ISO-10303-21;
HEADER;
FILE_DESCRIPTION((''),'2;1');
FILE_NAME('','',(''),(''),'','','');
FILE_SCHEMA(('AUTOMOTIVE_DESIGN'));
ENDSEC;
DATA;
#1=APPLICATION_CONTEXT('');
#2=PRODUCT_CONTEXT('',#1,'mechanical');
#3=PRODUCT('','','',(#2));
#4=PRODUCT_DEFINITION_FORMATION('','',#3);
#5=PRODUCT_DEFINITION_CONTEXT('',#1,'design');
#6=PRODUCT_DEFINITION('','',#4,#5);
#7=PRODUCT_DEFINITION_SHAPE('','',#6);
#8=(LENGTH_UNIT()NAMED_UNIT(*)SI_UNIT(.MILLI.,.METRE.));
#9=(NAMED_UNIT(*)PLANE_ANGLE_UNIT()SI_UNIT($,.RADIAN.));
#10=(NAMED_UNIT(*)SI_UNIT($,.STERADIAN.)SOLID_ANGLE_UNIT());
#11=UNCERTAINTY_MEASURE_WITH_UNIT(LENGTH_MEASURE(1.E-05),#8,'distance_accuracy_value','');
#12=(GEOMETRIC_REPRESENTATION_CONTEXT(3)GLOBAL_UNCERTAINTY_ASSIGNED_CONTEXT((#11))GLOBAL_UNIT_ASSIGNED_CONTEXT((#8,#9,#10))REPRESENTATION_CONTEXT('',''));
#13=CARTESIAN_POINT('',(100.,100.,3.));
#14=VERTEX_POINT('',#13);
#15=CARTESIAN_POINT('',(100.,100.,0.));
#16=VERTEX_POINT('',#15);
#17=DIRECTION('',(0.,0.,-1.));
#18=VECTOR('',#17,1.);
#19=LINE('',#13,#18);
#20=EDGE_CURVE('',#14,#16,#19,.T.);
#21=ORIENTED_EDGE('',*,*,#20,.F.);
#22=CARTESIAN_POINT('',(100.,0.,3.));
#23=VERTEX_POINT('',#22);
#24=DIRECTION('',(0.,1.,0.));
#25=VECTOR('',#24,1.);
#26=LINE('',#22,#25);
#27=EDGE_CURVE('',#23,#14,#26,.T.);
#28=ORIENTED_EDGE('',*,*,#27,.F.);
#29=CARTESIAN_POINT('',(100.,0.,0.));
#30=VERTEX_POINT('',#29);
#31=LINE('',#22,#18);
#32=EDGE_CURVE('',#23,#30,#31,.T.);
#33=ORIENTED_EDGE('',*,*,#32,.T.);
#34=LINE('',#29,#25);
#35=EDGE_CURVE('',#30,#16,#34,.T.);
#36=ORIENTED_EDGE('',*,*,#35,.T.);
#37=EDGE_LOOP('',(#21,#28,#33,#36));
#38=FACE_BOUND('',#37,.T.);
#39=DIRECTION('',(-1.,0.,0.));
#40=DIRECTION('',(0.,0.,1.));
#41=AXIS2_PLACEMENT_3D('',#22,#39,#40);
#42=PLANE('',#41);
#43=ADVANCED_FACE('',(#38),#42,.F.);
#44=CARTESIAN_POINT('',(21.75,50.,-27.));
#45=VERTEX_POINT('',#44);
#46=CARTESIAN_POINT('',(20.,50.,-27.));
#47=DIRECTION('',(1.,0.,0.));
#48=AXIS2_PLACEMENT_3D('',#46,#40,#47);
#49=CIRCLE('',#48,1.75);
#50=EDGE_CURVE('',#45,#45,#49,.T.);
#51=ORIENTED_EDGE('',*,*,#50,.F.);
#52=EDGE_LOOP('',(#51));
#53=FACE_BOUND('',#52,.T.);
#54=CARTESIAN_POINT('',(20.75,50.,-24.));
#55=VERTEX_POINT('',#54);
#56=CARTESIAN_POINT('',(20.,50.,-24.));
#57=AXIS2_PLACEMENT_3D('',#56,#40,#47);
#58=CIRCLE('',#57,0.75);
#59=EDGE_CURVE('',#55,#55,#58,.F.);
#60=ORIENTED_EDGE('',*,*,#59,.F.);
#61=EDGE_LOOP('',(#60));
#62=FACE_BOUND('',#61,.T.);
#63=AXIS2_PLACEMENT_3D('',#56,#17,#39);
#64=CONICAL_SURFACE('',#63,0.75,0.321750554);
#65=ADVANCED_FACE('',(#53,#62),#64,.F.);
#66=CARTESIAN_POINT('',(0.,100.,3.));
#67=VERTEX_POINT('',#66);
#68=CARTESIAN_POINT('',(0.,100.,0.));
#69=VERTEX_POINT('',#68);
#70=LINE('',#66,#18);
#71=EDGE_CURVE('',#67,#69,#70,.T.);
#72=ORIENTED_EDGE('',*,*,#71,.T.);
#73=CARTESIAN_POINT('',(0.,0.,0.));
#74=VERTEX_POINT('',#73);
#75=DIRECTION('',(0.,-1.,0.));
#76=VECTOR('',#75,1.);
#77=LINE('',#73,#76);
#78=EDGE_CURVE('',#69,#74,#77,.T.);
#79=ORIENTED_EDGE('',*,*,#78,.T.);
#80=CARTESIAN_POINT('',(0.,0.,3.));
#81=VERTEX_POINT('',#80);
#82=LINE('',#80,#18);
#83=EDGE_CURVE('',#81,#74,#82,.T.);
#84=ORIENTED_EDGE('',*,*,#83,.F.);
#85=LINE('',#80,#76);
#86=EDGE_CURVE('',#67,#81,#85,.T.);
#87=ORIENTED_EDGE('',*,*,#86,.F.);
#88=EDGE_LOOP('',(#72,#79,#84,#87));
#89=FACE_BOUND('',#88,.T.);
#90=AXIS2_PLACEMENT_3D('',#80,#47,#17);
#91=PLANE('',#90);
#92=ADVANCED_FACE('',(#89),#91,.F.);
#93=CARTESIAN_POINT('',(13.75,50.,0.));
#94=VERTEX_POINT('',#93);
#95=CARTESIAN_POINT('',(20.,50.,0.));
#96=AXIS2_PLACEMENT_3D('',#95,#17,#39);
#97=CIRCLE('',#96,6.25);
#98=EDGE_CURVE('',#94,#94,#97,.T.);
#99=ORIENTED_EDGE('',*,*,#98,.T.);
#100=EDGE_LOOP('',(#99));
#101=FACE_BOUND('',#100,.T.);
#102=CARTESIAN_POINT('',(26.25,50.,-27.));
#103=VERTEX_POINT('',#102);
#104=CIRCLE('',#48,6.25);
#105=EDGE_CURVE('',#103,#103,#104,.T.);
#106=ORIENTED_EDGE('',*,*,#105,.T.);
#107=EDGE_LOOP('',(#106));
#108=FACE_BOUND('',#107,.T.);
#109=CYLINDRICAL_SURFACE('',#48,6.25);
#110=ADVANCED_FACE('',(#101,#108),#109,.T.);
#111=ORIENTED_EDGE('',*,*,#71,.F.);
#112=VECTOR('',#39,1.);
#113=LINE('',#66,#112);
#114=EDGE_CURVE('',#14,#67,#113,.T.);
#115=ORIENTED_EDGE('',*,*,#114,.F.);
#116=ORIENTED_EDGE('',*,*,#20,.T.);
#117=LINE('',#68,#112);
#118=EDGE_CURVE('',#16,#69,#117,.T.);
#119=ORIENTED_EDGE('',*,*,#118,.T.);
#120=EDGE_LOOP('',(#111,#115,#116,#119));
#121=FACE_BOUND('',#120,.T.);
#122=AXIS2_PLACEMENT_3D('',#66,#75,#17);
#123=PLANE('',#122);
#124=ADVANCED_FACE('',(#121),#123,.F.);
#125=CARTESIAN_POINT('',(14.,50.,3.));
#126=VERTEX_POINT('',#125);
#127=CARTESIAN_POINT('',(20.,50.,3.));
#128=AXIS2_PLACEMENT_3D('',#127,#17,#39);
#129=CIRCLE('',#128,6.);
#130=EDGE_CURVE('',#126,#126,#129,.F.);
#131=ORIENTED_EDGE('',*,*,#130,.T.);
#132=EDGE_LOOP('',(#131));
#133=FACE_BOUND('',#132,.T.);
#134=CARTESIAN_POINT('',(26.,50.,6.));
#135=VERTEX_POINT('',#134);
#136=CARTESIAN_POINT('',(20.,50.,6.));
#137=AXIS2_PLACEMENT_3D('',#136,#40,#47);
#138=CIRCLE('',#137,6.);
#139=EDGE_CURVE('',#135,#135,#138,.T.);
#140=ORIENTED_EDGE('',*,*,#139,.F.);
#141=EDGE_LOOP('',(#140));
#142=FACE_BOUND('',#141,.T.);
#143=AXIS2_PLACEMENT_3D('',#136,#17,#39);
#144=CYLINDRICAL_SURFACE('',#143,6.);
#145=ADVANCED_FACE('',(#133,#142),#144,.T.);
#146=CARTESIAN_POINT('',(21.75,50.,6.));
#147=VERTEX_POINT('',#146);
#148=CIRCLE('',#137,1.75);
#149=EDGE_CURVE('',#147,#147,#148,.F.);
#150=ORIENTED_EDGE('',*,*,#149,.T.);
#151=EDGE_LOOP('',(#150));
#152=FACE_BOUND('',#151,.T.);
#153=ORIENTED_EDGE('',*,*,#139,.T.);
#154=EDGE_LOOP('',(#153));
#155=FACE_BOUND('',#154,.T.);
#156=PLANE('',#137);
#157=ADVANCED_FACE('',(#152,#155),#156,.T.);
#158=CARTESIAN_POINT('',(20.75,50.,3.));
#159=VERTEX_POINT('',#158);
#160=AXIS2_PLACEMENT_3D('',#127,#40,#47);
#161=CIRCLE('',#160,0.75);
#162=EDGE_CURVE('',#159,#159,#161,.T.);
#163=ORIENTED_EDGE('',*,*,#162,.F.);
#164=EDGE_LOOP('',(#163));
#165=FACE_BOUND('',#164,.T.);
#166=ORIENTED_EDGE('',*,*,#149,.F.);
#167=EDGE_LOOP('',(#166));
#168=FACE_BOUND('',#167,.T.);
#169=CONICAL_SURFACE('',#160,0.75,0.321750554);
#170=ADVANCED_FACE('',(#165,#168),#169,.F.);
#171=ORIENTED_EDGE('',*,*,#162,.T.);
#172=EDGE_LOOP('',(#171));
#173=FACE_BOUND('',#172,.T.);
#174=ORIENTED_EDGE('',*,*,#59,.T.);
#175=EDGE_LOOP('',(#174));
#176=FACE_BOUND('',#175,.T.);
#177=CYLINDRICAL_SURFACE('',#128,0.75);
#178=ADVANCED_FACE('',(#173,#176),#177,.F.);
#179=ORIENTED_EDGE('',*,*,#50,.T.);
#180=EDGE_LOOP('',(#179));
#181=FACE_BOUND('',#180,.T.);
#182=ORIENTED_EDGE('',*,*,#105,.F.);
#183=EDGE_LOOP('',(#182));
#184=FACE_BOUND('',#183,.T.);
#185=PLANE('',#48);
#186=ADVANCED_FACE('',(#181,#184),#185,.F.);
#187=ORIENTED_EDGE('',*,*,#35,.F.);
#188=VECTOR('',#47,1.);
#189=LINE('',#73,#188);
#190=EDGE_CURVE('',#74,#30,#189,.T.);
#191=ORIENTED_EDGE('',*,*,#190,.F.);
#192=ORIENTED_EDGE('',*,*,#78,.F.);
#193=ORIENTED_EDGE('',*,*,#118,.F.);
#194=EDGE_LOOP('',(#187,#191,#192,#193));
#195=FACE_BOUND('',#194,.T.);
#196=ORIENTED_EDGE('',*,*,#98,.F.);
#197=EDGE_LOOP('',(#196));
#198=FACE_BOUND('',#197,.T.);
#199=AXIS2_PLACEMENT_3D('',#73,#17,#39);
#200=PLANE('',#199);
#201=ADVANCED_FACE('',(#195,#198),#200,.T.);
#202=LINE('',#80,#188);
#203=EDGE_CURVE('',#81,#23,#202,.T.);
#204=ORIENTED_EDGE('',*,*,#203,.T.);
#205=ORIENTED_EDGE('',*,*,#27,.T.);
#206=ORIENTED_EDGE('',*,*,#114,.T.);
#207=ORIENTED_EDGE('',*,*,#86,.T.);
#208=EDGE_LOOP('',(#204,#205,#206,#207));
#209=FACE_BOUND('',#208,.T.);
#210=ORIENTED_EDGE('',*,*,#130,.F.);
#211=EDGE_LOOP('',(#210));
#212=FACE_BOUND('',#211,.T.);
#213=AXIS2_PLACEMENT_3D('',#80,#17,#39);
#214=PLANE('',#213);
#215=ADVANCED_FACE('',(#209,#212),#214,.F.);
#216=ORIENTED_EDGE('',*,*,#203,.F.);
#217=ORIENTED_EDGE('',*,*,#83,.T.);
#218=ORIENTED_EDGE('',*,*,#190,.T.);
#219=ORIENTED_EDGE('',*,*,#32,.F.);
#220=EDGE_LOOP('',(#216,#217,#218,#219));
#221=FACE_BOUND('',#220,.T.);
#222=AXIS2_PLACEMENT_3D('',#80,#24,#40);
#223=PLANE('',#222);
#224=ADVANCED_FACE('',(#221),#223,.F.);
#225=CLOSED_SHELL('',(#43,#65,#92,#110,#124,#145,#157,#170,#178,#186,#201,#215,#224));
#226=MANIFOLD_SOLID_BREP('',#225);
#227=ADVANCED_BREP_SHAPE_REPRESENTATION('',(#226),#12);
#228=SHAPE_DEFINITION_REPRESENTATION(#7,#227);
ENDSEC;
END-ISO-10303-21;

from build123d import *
from OCP.BRepFilletAPI import BRepFilletAPI_MakeChamfer

# Parameters (mm, degrees)
SKETCH1_W           = 100
SKETCH1_H           = 100
BOSS_EXTRUDE1_DEPTH = 3
SKETCH2_R           = 6.25
BOSS_EXTRUDE2_DEPTH = 30
SKETCH3_R           = 0.75
CUT_EXTRUDE1_DEPTH  = 145.568322948
SKETCH4_R           = 6
SKETCH4_R_2         = 0.75
BOSS_EXTRUDE3_DEPTH = 3
CHAMFER1_SIZE       = 1
CHAMFER1_SIZE_2     = 3


with BuildPart() as part:
    # Sketch1 → Boss-Extrude1 (new body)
    with BuildSketch(Plane.XY):
        with Locations((50, 50)):
            Rectangle(SKETCH1_W, SKETCH1_H)
    extrude(amount=BOSS_EXTRUDE1_DEPTH)

    # Sketch2 → Boss-Extrude2 (add)
    with BuildSketch(Plane.XY.offset(3)):
        with Locations((20, 50)):
            Circle(SKETCH2_R)
    extrude(amount=-BOSS_EXTRUDE2_DEPTH)

    # Sketch3 → Cut-Extrude1 (cut, through all)
    with BuildSketch(Plane(origin=(0, 0, -27), x_dir=(-1, 0, 0), z_dir=(0, 0, -1))):
        with Locations((-20, 50)):
            Circle(SKETCH3_R)
    extrude(amount=-CUT_EXTRUDE1_DEPTH, mode=Mode.SUBTRACT)

    # Sketch4 → Boss-Extrude3 (add)
    with BuildSketch(Plane.XY.offset(3)):
        with Locations(Location((20, 50, 0), (0, 0, 180))):
            Circle(SKETCH4_R)
        with Locations(Location((20, 50, 0), (0, 0, 180))):
            Circle(SKETCH4_R_2, mode=Mode.SUBTRACT)
    extrude(amount=BOSS_EXTRUDE3_DEPTH)

    # Chamfer1
    chamfer1_edges_1 = [part.edges().sort_by_distance(p)[0] for p in [
        (20.75, 50, -27),
    ]]
    chamfer1_side_1 = [part.faces().sort_by_distance(p)[0] for p in [
        (20.77, 50, -27),
    ]]
    chamfer1_edges_2 = [part.edges().sort_by_distance(p)[0] for p in [
        (20.75, 50, 6),
    ]]
    chamfer1_side_2 = [part.faces().sort_by_distance(p)[0] for p in [
        (20.77, 50, 6),
    ]]
    chamfer1 = BRepFilletAPI_MakeChamfer(part.part.solid().wrapped)
    for e in chamfer1_edges_1:
        chamfer1.Add(CHAMFER1_SIZE - 0.0001, CHAMFER1_SIZE_2 - 0.0001, e.wrapped, chamfer1_side_1[0].wrapped)
    for e in chamfer1_edges_2:
        chamfer1.Add(CHAMFER1_SIZE - 0.0001, CHAMFER1_SIZE_2 - 0.0001, e.wrapped, chamfer1_side_2[0].wrapped)
    add(Compound.cast(chamfer1.Shape()), mode=Mode.REPLACE)  # a hair under: the kernel refuses the full size


solid = part.part
